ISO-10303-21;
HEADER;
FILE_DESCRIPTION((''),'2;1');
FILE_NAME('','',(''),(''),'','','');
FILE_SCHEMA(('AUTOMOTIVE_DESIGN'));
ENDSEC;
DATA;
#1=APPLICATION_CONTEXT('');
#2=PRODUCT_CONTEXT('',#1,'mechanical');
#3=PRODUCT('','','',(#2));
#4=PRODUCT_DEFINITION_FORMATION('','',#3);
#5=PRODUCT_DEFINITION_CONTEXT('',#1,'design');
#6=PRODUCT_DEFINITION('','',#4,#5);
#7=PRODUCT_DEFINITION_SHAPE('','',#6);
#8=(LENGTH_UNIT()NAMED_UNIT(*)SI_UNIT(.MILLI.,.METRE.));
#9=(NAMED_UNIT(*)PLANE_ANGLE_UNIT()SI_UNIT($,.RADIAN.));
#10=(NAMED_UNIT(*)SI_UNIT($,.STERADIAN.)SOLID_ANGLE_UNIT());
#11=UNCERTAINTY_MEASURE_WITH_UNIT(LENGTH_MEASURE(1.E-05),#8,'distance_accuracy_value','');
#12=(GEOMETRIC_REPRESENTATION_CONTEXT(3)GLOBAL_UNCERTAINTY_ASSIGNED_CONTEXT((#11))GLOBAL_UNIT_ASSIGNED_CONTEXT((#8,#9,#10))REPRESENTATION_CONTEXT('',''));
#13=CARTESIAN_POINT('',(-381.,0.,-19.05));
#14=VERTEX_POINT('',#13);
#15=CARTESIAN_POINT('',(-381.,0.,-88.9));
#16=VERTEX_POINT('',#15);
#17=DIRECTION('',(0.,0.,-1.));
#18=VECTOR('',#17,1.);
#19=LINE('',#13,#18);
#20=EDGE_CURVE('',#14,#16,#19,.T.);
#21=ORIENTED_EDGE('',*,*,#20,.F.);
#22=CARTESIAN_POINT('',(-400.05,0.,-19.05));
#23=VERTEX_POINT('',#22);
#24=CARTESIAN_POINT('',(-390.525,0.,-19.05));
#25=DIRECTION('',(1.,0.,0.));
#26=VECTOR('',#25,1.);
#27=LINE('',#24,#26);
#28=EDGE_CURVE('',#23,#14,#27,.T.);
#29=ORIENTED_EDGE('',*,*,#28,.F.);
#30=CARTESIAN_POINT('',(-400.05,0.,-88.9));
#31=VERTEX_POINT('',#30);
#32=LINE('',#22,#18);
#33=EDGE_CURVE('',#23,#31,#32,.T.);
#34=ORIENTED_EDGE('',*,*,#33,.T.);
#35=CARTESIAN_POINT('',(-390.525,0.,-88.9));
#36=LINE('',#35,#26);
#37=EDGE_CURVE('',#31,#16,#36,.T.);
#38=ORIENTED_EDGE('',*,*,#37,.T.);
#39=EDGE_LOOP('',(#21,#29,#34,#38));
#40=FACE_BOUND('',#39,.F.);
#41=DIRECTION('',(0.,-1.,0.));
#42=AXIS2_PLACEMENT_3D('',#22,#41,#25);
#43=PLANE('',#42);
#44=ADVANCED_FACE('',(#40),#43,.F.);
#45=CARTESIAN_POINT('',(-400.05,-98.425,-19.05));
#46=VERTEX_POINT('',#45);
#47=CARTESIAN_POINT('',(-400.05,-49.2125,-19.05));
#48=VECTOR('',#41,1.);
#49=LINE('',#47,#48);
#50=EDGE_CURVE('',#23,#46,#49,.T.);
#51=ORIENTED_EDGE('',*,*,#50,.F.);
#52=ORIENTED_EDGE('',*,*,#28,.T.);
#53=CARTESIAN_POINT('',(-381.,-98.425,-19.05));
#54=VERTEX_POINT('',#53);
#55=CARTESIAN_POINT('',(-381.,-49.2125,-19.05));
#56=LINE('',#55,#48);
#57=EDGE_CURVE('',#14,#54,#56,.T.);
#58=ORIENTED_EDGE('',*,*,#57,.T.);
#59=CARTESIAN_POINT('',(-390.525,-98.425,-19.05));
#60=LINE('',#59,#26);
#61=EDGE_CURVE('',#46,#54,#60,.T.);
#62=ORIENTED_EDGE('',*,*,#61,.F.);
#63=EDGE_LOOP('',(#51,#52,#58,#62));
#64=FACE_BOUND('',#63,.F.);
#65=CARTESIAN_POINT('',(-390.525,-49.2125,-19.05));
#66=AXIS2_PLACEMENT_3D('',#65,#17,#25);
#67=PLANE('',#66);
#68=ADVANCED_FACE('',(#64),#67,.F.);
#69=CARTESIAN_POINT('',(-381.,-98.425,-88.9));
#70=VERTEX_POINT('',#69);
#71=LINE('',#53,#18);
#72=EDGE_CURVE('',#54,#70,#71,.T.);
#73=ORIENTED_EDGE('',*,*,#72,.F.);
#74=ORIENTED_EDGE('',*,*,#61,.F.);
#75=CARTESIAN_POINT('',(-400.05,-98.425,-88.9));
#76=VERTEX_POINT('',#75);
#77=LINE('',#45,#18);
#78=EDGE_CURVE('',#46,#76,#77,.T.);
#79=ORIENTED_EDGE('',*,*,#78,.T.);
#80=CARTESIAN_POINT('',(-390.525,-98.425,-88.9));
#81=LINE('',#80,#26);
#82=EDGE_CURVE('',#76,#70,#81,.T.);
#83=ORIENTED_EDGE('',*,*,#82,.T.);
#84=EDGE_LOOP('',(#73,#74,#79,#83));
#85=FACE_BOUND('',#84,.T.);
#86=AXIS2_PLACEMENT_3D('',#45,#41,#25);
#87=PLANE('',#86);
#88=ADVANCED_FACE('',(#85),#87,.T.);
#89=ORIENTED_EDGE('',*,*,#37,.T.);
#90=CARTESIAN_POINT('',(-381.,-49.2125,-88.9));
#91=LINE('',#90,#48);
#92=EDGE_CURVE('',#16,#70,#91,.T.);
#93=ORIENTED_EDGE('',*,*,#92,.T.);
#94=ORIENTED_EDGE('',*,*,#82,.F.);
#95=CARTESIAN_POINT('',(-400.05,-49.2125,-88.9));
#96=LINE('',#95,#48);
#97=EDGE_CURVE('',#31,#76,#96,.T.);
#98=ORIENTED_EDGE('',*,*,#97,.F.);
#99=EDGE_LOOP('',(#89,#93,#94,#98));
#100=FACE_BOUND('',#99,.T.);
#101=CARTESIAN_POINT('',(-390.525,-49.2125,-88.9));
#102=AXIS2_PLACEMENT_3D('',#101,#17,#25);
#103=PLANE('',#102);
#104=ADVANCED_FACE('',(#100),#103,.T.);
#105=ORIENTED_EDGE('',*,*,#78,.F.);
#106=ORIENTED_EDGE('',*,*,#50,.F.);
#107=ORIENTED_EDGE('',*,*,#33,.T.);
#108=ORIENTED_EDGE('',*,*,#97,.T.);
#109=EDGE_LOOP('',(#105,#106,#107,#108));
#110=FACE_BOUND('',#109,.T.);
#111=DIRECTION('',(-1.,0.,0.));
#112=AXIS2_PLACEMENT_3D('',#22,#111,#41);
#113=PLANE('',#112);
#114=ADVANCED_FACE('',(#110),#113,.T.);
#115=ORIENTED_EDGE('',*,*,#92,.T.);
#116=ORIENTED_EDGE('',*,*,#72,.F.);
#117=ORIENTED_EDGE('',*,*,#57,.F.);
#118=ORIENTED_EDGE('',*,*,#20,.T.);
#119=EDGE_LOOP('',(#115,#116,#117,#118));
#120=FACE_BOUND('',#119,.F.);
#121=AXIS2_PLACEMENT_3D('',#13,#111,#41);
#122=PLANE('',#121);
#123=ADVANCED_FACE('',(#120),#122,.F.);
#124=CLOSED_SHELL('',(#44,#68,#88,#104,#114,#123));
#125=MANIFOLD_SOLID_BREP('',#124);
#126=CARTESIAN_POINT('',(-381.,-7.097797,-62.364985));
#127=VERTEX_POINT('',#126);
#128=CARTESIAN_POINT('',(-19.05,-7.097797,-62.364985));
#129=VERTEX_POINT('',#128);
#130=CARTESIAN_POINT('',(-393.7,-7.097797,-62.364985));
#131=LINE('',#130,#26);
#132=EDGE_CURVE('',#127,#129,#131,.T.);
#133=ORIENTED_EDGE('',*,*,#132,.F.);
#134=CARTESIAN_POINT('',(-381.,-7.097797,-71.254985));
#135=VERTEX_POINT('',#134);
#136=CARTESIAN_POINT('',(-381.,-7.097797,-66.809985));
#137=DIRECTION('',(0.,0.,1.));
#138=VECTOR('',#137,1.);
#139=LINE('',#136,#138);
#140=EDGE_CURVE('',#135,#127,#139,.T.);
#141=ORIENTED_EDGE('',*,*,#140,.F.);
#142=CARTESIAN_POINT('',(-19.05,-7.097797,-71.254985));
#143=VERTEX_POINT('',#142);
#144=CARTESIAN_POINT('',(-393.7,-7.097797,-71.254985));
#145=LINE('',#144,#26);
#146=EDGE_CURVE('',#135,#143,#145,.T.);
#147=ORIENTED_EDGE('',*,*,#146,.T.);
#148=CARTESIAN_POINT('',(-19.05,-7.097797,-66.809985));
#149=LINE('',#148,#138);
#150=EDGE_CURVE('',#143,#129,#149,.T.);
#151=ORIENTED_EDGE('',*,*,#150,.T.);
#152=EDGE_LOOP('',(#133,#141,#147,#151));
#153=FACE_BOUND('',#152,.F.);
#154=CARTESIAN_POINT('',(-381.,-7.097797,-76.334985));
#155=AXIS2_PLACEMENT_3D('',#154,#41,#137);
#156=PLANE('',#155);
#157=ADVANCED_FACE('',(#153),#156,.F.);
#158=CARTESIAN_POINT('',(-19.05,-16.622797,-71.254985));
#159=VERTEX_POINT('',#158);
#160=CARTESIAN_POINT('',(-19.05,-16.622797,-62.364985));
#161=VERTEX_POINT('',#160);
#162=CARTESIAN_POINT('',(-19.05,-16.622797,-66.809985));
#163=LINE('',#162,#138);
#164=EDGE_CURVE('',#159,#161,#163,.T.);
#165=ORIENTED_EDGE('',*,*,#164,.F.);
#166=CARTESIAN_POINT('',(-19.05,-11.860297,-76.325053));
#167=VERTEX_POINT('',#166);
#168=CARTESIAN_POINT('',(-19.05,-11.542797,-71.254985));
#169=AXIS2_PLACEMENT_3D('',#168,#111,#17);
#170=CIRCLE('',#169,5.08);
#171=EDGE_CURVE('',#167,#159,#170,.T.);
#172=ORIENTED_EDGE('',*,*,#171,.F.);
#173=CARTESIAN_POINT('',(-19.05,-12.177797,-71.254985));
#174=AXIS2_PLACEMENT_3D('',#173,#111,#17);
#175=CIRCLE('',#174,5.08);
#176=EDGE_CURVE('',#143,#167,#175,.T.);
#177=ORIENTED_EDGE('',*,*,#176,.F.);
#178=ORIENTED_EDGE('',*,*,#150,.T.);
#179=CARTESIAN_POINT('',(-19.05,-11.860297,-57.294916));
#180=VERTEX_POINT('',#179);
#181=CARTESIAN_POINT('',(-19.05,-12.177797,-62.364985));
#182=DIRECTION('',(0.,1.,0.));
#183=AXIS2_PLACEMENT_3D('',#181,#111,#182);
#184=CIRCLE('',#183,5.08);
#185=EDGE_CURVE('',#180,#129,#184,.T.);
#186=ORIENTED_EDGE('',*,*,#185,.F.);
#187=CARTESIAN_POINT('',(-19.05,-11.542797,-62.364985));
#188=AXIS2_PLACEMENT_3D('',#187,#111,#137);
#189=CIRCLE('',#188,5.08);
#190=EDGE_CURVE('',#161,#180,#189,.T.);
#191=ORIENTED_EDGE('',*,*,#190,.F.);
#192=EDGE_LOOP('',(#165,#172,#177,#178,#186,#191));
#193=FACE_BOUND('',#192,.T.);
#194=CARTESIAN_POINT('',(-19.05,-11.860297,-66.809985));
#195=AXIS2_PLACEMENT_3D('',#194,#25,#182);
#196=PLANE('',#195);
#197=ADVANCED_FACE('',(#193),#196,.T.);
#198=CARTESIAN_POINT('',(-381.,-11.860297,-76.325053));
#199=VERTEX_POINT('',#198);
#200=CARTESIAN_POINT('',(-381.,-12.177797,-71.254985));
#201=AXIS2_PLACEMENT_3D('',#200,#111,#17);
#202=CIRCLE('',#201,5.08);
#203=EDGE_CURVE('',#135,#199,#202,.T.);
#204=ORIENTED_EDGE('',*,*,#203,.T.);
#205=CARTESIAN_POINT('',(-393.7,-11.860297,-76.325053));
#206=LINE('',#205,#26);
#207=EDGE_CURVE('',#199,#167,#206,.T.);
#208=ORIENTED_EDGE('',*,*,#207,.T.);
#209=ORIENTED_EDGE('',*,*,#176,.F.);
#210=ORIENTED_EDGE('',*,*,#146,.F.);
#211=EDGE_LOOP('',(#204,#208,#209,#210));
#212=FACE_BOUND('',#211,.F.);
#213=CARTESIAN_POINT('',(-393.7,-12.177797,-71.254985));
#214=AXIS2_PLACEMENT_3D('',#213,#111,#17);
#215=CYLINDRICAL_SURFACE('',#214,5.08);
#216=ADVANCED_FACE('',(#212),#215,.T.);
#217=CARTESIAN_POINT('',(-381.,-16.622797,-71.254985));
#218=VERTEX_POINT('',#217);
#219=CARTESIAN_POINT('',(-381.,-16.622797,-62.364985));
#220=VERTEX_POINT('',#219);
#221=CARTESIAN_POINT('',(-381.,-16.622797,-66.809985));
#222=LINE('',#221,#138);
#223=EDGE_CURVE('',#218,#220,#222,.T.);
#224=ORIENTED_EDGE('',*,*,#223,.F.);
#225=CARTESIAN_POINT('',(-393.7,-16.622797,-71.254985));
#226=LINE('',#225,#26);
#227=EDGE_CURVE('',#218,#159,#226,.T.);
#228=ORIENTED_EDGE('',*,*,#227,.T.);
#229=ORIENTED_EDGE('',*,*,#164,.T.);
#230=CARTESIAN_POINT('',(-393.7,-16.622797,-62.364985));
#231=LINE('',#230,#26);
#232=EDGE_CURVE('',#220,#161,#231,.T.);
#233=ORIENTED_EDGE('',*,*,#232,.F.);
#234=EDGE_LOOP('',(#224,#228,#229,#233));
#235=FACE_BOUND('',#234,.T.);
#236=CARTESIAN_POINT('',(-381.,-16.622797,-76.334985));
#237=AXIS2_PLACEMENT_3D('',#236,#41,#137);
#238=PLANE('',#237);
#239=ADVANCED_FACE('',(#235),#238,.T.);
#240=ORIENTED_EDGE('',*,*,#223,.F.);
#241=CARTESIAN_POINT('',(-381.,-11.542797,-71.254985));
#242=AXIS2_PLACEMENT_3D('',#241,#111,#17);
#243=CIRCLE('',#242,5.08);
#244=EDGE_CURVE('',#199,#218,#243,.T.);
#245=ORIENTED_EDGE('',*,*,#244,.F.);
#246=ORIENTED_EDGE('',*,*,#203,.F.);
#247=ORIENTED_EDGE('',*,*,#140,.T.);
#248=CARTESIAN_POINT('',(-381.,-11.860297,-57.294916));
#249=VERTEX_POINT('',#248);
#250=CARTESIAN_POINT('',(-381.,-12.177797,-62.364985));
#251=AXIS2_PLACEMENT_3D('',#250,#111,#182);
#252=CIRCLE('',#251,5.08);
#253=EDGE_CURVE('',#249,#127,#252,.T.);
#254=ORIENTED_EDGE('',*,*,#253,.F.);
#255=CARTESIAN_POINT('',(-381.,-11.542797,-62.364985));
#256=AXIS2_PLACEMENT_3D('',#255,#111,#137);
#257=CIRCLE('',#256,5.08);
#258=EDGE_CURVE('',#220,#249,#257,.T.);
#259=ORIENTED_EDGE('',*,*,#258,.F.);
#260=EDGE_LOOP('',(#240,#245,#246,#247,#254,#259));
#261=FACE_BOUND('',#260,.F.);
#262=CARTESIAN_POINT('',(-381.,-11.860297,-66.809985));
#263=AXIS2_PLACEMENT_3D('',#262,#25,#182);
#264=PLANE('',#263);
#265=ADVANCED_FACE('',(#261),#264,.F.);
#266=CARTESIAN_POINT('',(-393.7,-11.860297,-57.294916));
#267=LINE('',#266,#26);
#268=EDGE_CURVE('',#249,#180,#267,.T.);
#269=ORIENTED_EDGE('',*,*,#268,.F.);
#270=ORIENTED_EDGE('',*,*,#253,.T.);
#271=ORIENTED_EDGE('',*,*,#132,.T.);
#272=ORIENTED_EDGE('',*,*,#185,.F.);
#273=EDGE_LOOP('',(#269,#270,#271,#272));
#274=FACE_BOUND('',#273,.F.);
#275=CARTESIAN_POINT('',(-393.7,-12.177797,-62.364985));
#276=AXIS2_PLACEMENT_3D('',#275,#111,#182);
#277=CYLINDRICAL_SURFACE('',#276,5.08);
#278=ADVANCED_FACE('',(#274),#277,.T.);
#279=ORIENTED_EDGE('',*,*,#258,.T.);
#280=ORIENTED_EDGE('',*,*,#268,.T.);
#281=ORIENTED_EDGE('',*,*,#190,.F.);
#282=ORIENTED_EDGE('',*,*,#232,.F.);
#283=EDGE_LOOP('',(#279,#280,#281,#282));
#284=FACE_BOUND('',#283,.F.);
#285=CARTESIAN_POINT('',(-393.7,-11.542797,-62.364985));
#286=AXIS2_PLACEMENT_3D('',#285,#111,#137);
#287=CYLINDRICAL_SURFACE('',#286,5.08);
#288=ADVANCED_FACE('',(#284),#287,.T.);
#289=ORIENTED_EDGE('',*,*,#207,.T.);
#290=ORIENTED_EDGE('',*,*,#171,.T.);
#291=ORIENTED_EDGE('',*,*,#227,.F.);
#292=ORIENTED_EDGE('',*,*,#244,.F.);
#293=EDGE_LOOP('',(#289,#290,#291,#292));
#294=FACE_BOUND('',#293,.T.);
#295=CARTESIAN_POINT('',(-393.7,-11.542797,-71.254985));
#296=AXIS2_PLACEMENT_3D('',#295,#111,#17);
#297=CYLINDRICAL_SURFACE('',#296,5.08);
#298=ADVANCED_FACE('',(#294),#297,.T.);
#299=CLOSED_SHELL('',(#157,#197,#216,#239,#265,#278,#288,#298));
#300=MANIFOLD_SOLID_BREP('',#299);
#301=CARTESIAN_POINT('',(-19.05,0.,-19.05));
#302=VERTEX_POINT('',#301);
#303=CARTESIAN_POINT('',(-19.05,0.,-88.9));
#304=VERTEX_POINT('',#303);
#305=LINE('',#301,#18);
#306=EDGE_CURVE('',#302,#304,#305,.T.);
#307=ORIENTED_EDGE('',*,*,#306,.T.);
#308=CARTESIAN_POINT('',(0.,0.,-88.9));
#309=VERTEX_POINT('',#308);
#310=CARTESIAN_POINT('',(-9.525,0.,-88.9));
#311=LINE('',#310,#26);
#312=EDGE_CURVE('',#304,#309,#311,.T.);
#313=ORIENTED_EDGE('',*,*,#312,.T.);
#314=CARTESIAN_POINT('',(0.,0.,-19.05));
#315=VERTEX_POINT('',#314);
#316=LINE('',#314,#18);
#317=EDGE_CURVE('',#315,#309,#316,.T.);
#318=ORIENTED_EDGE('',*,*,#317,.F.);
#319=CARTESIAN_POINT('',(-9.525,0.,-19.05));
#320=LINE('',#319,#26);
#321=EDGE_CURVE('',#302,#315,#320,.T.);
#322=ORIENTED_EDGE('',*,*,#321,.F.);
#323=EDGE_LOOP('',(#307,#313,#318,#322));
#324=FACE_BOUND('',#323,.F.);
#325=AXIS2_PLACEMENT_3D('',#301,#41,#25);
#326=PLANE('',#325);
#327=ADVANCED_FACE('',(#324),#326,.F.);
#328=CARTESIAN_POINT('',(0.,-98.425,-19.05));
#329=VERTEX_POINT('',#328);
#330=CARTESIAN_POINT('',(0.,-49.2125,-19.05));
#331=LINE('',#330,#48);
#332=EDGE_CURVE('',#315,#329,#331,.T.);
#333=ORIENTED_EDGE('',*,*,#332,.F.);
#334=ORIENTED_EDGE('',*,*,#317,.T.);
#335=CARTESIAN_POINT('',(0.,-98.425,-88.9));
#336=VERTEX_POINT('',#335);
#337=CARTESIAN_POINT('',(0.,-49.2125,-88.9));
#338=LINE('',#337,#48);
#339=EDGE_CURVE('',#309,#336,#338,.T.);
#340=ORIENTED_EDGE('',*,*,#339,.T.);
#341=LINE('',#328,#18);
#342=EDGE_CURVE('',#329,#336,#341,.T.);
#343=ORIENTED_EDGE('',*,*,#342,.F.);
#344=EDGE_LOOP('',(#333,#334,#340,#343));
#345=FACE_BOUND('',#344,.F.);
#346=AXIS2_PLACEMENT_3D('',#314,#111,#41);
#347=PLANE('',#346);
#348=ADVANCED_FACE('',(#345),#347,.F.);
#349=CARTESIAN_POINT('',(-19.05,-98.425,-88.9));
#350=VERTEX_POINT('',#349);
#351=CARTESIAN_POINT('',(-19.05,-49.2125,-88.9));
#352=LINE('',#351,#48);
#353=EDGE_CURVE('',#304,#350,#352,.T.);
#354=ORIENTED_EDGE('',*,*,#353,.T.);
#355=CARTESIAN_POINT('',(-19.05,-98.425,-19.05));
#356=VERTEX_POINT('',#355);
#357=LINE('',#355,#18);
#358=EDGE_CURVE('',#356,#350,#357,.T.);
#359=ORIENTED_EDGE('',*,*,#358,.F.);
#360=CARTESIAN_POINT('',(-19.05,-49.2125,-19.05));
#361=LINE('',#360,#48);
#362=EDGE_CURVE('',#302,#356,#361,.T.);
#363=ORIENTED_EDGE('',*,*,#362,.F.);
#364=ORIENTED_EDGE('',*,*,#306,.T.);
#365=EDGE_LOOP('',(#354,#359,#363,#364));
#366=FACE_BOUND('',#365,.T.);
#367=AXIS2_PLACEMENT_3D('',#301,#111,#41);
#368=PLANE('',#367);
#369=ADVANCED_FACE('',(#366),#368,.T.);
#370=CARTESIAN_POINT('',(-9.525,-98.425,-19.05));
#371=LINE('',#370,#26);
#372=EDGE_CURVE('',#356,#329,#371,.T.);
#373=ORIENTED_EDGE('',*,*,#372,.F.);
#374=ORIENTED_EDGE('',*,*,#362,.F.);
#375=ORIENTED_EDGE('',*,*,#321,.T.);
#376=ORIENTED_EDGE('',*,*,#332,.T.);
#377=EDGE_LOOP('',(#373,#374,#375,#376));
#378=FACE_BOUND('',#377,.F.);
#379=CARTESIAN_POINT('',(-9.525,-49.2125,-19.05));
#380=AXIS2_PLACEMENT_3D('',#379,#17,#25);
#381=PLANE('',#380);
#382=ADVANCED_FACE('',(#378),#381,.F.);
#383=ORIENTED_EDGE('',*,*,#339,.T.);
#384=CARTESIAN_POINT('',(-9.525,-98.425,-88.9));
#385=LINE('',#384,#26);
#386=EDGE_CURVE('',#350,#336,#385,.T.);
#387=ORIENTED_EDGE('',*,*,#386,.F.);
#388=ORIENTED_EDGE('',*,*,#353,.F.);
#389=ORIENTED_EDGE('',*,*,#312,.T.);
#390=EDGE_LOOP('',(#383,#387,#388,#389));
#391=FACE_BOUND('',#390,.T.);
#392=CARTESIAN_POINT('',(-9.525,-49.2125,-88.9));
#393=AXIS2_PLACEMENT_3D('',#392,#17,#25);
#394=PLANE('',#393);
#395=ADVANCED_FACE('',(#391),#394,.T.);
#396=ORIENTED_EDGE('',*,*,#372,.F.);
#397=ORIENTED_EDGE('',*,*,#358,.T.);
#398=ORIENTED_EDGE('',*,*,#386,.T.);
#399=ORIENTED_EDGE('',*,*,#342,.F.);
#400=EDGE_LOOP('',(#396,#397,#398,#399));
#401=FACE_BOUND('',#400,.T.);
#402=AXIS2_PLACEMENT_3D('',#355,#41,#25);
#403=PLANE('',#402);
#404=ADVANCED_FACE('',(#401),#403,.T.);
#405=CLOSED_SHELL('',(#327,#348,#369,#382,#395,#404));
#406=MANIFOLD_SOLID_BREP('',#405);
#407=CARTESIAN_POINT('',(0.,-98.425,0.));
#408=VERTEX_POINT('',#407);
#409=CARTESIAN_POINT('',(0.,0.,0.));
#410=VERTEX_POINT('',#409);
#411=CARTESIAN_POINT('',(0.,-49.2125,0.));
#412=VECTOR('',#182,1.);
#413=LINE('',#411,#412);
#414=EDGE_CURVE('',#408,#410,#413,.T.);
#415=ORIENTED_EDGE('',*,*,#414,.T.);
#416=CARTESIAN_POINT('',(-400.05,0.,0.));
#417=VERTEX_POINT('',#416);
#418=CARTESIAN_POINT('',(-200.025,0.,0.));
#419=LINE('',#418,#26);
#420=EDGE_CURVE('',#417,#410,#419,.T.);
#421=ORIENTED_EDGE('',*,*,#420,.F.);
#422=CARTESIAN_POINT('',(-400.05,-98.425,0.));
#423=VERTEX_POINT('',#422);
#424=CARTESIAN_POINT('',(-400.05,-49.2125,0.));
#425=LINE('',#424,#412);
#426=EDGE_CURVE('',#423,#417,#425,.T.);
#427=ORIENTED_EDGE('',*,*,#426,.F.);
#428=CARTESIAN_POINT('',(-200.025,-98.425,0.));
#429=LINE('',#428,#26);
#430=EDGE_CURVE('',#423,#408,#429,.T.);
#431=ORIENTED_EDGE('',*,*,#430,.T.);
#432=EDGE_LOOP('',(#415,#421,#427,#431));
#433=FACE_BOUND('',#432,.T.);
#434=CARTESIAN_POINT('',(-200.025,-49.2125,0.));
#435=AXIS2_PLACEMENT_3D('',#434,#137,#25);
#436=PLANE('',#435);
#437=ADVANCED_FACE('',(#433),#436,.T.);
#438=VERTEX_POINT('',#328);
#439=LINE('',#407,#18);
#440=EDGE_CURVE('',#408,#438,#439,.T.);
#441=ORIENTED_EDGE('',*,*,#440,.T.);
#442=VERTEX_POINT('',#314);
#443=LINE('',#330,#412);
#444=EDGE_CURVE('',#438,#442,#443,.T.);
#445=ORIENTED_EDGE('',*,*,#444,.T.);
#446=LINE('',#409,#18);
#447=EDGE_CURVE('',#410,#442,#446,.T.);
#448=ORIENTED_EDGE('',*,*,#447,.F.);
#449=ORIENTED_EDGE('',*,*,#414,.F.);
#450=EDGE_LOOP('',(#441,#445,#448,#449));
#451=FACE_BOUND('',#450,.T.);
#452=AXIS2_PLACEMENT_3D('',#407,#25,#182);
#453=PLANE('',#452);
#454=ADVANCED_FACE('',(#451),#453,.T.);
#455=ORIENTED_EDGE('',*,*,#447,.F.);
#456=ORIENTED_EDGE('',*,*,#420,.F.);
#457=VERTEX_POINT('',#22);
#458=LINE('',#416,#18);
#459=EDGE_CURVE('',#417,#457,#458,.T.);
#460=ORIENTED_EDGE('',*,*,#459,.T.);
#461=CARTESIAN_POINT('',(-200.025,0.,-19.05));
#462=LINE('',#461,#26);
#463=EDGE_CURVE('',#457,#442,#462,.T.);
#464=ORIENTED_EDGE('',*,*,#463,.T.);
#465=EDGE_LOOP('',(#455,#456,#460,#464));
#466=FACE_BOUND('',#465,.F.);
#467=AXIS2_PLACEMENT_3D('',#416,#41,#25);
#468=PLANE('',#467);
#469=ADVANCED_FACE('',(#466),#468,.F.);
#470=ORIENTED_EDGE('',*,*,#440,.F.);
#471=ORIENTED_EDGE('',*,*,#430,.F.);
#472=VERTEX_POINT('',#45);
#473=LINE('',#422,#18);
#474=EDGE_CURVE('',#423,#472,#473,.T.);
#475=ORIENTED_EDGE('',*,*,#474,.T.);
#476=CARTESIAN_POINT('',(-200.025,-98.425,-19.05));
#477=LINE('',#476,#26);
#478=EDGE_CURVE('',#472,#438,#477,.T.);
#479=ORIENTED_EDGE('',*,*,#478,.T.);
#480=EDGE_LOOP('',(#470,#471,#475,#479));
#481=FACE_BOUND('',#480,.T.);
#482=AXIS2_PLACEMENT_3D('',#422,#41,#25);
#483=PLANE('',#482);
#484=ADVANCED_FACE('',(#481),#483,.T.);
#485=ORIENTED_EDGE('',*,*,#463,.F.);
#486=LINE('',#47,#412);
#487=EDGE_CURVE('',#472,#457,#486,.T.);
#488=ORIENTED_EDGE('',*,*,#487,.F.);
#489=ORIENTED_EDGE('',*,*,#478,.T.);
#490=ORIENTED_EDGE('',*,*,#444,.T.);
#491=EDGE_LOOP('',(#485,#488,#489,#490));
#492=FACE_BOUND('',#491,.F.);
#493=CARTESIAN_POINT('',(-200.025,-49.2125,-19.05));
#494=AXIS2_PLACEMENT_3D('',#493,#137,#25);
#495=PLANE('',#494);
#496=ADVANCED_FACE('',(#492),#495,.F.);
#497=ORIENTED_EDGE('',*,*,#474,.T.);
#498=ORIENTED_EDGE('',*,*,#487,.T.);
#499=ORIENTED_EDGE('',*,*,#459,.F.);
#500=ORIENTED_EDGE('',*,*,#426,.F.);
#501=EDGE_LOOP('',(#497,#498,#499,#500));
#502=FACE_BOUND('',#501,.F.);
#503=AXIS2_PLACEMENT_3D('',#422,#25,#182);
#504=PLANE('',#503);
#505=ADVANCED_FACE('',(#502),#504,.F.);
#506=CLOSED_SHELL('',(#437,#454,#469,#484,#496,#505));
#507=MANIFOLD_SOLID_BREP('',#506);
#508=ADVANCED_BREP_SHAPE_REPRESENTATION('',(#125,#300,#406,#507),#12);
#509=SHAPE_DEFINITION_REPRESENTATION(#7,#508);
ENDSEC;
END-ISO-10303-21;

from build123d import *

# Parameters (mm, degrees)
F0_W        = 400.05
F0_H        = 98.425
F1_DEPTH    = 19.05
F2_W        = 19.05
F2_H        = 98.425
F3_DEPTH    = 69.85
F4_W        = 9.525
F4_H        = 19.05
F5_DEPTH    = 361.95
F6_T1_DEPTH = 387.35


# Not quite as in the source:
# - a fillet or chamfer that OpenCascade refuses, or shapes differently, is made with other operations: its cross-section is extruded or revolved along the edge and cut away or added


with BuildPart() as f1:
    # F0 (on Top) → F1 (new body)
    with BuildSketch(Plane.XY):
        with Locations((-200.025, -49.2125)):
            Rectangle(F0_W, F0_H)
    extrude(amount=-F1_DEPTH)


with BuildPart() as f3:
    # F2 (on face) → F3 (new body)
    with BuildSketch(Plane(origin=(0, 0, -19.05), x_dir=(1, 0, 0), z_dir=(0, 0, -1))):
        with Locations((-9.525, 49.2125)):
            Rectangle(F2_W, F2_H)
    extrude(amount=F3_DEPTH)


with BuildPart() as f3b:
    # F2 (on face) → F3, piece 2 (new body)
    with BuildSketch(Plane(origin=(0, 0, -19.05), x_dir=(1, 0, 0), z_dir=(0, 0, -1))):
        with Locations((-390.525, 49.2125)):
            Rectangle(F2_W, F2_H)
    extrude(amount=F3_DEPTH)


with BuildPart() as f5:
    # F4 (on face) → F5 (new body, through all)
    with BuildSketch(Plane.YZ.offset(-381)):
        with Locations((-11.8602966547, -66.8099847376)):
            Rectangle(F4_W, F4_H)
    extrude(amount=F5_DEPTH)

    # F6: fillet of radius 5.08 on 4 edges, made by hand

    # F6_s2 → F6_t1 (cut)
    with BuildSketch(Plane.YZ.offset(-393.7)):
        with BuildLine():
            ThreePointArc((-11.5427966547, -76.3349847376), (-15.1348991031, -74.8470871861), (-16.6227966547, -71.2549847376))
            Line((-16.6227966547, -71.2549847376), (-16.6227966547, -76.3349847376))
            Line((-16.6227966547, -76.3349847376), (-11.5427966547, -76.3349847376))
        make_face()
        with BuildLine():
            ThreePointArc((-12.1777966547, -76.3349847376), (-8.5856942063, -74.8470871861), (-7.0977966547, -71.2549847376))
            Line((-7.0977966547, -71.2549847376), (-7.0977966547, -76.3349847376))
            Line((-7.0977966547, -76.3349847376), (-12.1777966547, -76.3349847376))
        make_face()
        with BuildLine():
            ThreePointArc((-11.5427966547, -57.2849847376), (-15.1348991031, -58.7728822892), (-16.6227966547, -62.3649847376))
            Line((-16.6227966547, -62.3649847376), (-16.6227966547, -57.2849847376))
            Line((-16.6227966547, -57.2849847376), (-11.5427966547, -57.2849847376))
        make_face()
        with BuildLine():
            ThreePointArc((-7.0977966547, -62.3649847376), (-8.5856942063, -58.7728822892), (-12.1777966547, -57.2849847376))
            Line((-12.1777966547, -57.2849847376), (-7.0977966547, -57.2849847376))
            Line((-7.0977966547, -57.2849847376), (-7.0977966547, -62.3649847376))
        make_face()
    extrude(amount=F6_T1_DEPTH, mode=Mode.SUBTRACT)


solid = Compound([f1.part, f3.part, f3b.part, f5.part])
